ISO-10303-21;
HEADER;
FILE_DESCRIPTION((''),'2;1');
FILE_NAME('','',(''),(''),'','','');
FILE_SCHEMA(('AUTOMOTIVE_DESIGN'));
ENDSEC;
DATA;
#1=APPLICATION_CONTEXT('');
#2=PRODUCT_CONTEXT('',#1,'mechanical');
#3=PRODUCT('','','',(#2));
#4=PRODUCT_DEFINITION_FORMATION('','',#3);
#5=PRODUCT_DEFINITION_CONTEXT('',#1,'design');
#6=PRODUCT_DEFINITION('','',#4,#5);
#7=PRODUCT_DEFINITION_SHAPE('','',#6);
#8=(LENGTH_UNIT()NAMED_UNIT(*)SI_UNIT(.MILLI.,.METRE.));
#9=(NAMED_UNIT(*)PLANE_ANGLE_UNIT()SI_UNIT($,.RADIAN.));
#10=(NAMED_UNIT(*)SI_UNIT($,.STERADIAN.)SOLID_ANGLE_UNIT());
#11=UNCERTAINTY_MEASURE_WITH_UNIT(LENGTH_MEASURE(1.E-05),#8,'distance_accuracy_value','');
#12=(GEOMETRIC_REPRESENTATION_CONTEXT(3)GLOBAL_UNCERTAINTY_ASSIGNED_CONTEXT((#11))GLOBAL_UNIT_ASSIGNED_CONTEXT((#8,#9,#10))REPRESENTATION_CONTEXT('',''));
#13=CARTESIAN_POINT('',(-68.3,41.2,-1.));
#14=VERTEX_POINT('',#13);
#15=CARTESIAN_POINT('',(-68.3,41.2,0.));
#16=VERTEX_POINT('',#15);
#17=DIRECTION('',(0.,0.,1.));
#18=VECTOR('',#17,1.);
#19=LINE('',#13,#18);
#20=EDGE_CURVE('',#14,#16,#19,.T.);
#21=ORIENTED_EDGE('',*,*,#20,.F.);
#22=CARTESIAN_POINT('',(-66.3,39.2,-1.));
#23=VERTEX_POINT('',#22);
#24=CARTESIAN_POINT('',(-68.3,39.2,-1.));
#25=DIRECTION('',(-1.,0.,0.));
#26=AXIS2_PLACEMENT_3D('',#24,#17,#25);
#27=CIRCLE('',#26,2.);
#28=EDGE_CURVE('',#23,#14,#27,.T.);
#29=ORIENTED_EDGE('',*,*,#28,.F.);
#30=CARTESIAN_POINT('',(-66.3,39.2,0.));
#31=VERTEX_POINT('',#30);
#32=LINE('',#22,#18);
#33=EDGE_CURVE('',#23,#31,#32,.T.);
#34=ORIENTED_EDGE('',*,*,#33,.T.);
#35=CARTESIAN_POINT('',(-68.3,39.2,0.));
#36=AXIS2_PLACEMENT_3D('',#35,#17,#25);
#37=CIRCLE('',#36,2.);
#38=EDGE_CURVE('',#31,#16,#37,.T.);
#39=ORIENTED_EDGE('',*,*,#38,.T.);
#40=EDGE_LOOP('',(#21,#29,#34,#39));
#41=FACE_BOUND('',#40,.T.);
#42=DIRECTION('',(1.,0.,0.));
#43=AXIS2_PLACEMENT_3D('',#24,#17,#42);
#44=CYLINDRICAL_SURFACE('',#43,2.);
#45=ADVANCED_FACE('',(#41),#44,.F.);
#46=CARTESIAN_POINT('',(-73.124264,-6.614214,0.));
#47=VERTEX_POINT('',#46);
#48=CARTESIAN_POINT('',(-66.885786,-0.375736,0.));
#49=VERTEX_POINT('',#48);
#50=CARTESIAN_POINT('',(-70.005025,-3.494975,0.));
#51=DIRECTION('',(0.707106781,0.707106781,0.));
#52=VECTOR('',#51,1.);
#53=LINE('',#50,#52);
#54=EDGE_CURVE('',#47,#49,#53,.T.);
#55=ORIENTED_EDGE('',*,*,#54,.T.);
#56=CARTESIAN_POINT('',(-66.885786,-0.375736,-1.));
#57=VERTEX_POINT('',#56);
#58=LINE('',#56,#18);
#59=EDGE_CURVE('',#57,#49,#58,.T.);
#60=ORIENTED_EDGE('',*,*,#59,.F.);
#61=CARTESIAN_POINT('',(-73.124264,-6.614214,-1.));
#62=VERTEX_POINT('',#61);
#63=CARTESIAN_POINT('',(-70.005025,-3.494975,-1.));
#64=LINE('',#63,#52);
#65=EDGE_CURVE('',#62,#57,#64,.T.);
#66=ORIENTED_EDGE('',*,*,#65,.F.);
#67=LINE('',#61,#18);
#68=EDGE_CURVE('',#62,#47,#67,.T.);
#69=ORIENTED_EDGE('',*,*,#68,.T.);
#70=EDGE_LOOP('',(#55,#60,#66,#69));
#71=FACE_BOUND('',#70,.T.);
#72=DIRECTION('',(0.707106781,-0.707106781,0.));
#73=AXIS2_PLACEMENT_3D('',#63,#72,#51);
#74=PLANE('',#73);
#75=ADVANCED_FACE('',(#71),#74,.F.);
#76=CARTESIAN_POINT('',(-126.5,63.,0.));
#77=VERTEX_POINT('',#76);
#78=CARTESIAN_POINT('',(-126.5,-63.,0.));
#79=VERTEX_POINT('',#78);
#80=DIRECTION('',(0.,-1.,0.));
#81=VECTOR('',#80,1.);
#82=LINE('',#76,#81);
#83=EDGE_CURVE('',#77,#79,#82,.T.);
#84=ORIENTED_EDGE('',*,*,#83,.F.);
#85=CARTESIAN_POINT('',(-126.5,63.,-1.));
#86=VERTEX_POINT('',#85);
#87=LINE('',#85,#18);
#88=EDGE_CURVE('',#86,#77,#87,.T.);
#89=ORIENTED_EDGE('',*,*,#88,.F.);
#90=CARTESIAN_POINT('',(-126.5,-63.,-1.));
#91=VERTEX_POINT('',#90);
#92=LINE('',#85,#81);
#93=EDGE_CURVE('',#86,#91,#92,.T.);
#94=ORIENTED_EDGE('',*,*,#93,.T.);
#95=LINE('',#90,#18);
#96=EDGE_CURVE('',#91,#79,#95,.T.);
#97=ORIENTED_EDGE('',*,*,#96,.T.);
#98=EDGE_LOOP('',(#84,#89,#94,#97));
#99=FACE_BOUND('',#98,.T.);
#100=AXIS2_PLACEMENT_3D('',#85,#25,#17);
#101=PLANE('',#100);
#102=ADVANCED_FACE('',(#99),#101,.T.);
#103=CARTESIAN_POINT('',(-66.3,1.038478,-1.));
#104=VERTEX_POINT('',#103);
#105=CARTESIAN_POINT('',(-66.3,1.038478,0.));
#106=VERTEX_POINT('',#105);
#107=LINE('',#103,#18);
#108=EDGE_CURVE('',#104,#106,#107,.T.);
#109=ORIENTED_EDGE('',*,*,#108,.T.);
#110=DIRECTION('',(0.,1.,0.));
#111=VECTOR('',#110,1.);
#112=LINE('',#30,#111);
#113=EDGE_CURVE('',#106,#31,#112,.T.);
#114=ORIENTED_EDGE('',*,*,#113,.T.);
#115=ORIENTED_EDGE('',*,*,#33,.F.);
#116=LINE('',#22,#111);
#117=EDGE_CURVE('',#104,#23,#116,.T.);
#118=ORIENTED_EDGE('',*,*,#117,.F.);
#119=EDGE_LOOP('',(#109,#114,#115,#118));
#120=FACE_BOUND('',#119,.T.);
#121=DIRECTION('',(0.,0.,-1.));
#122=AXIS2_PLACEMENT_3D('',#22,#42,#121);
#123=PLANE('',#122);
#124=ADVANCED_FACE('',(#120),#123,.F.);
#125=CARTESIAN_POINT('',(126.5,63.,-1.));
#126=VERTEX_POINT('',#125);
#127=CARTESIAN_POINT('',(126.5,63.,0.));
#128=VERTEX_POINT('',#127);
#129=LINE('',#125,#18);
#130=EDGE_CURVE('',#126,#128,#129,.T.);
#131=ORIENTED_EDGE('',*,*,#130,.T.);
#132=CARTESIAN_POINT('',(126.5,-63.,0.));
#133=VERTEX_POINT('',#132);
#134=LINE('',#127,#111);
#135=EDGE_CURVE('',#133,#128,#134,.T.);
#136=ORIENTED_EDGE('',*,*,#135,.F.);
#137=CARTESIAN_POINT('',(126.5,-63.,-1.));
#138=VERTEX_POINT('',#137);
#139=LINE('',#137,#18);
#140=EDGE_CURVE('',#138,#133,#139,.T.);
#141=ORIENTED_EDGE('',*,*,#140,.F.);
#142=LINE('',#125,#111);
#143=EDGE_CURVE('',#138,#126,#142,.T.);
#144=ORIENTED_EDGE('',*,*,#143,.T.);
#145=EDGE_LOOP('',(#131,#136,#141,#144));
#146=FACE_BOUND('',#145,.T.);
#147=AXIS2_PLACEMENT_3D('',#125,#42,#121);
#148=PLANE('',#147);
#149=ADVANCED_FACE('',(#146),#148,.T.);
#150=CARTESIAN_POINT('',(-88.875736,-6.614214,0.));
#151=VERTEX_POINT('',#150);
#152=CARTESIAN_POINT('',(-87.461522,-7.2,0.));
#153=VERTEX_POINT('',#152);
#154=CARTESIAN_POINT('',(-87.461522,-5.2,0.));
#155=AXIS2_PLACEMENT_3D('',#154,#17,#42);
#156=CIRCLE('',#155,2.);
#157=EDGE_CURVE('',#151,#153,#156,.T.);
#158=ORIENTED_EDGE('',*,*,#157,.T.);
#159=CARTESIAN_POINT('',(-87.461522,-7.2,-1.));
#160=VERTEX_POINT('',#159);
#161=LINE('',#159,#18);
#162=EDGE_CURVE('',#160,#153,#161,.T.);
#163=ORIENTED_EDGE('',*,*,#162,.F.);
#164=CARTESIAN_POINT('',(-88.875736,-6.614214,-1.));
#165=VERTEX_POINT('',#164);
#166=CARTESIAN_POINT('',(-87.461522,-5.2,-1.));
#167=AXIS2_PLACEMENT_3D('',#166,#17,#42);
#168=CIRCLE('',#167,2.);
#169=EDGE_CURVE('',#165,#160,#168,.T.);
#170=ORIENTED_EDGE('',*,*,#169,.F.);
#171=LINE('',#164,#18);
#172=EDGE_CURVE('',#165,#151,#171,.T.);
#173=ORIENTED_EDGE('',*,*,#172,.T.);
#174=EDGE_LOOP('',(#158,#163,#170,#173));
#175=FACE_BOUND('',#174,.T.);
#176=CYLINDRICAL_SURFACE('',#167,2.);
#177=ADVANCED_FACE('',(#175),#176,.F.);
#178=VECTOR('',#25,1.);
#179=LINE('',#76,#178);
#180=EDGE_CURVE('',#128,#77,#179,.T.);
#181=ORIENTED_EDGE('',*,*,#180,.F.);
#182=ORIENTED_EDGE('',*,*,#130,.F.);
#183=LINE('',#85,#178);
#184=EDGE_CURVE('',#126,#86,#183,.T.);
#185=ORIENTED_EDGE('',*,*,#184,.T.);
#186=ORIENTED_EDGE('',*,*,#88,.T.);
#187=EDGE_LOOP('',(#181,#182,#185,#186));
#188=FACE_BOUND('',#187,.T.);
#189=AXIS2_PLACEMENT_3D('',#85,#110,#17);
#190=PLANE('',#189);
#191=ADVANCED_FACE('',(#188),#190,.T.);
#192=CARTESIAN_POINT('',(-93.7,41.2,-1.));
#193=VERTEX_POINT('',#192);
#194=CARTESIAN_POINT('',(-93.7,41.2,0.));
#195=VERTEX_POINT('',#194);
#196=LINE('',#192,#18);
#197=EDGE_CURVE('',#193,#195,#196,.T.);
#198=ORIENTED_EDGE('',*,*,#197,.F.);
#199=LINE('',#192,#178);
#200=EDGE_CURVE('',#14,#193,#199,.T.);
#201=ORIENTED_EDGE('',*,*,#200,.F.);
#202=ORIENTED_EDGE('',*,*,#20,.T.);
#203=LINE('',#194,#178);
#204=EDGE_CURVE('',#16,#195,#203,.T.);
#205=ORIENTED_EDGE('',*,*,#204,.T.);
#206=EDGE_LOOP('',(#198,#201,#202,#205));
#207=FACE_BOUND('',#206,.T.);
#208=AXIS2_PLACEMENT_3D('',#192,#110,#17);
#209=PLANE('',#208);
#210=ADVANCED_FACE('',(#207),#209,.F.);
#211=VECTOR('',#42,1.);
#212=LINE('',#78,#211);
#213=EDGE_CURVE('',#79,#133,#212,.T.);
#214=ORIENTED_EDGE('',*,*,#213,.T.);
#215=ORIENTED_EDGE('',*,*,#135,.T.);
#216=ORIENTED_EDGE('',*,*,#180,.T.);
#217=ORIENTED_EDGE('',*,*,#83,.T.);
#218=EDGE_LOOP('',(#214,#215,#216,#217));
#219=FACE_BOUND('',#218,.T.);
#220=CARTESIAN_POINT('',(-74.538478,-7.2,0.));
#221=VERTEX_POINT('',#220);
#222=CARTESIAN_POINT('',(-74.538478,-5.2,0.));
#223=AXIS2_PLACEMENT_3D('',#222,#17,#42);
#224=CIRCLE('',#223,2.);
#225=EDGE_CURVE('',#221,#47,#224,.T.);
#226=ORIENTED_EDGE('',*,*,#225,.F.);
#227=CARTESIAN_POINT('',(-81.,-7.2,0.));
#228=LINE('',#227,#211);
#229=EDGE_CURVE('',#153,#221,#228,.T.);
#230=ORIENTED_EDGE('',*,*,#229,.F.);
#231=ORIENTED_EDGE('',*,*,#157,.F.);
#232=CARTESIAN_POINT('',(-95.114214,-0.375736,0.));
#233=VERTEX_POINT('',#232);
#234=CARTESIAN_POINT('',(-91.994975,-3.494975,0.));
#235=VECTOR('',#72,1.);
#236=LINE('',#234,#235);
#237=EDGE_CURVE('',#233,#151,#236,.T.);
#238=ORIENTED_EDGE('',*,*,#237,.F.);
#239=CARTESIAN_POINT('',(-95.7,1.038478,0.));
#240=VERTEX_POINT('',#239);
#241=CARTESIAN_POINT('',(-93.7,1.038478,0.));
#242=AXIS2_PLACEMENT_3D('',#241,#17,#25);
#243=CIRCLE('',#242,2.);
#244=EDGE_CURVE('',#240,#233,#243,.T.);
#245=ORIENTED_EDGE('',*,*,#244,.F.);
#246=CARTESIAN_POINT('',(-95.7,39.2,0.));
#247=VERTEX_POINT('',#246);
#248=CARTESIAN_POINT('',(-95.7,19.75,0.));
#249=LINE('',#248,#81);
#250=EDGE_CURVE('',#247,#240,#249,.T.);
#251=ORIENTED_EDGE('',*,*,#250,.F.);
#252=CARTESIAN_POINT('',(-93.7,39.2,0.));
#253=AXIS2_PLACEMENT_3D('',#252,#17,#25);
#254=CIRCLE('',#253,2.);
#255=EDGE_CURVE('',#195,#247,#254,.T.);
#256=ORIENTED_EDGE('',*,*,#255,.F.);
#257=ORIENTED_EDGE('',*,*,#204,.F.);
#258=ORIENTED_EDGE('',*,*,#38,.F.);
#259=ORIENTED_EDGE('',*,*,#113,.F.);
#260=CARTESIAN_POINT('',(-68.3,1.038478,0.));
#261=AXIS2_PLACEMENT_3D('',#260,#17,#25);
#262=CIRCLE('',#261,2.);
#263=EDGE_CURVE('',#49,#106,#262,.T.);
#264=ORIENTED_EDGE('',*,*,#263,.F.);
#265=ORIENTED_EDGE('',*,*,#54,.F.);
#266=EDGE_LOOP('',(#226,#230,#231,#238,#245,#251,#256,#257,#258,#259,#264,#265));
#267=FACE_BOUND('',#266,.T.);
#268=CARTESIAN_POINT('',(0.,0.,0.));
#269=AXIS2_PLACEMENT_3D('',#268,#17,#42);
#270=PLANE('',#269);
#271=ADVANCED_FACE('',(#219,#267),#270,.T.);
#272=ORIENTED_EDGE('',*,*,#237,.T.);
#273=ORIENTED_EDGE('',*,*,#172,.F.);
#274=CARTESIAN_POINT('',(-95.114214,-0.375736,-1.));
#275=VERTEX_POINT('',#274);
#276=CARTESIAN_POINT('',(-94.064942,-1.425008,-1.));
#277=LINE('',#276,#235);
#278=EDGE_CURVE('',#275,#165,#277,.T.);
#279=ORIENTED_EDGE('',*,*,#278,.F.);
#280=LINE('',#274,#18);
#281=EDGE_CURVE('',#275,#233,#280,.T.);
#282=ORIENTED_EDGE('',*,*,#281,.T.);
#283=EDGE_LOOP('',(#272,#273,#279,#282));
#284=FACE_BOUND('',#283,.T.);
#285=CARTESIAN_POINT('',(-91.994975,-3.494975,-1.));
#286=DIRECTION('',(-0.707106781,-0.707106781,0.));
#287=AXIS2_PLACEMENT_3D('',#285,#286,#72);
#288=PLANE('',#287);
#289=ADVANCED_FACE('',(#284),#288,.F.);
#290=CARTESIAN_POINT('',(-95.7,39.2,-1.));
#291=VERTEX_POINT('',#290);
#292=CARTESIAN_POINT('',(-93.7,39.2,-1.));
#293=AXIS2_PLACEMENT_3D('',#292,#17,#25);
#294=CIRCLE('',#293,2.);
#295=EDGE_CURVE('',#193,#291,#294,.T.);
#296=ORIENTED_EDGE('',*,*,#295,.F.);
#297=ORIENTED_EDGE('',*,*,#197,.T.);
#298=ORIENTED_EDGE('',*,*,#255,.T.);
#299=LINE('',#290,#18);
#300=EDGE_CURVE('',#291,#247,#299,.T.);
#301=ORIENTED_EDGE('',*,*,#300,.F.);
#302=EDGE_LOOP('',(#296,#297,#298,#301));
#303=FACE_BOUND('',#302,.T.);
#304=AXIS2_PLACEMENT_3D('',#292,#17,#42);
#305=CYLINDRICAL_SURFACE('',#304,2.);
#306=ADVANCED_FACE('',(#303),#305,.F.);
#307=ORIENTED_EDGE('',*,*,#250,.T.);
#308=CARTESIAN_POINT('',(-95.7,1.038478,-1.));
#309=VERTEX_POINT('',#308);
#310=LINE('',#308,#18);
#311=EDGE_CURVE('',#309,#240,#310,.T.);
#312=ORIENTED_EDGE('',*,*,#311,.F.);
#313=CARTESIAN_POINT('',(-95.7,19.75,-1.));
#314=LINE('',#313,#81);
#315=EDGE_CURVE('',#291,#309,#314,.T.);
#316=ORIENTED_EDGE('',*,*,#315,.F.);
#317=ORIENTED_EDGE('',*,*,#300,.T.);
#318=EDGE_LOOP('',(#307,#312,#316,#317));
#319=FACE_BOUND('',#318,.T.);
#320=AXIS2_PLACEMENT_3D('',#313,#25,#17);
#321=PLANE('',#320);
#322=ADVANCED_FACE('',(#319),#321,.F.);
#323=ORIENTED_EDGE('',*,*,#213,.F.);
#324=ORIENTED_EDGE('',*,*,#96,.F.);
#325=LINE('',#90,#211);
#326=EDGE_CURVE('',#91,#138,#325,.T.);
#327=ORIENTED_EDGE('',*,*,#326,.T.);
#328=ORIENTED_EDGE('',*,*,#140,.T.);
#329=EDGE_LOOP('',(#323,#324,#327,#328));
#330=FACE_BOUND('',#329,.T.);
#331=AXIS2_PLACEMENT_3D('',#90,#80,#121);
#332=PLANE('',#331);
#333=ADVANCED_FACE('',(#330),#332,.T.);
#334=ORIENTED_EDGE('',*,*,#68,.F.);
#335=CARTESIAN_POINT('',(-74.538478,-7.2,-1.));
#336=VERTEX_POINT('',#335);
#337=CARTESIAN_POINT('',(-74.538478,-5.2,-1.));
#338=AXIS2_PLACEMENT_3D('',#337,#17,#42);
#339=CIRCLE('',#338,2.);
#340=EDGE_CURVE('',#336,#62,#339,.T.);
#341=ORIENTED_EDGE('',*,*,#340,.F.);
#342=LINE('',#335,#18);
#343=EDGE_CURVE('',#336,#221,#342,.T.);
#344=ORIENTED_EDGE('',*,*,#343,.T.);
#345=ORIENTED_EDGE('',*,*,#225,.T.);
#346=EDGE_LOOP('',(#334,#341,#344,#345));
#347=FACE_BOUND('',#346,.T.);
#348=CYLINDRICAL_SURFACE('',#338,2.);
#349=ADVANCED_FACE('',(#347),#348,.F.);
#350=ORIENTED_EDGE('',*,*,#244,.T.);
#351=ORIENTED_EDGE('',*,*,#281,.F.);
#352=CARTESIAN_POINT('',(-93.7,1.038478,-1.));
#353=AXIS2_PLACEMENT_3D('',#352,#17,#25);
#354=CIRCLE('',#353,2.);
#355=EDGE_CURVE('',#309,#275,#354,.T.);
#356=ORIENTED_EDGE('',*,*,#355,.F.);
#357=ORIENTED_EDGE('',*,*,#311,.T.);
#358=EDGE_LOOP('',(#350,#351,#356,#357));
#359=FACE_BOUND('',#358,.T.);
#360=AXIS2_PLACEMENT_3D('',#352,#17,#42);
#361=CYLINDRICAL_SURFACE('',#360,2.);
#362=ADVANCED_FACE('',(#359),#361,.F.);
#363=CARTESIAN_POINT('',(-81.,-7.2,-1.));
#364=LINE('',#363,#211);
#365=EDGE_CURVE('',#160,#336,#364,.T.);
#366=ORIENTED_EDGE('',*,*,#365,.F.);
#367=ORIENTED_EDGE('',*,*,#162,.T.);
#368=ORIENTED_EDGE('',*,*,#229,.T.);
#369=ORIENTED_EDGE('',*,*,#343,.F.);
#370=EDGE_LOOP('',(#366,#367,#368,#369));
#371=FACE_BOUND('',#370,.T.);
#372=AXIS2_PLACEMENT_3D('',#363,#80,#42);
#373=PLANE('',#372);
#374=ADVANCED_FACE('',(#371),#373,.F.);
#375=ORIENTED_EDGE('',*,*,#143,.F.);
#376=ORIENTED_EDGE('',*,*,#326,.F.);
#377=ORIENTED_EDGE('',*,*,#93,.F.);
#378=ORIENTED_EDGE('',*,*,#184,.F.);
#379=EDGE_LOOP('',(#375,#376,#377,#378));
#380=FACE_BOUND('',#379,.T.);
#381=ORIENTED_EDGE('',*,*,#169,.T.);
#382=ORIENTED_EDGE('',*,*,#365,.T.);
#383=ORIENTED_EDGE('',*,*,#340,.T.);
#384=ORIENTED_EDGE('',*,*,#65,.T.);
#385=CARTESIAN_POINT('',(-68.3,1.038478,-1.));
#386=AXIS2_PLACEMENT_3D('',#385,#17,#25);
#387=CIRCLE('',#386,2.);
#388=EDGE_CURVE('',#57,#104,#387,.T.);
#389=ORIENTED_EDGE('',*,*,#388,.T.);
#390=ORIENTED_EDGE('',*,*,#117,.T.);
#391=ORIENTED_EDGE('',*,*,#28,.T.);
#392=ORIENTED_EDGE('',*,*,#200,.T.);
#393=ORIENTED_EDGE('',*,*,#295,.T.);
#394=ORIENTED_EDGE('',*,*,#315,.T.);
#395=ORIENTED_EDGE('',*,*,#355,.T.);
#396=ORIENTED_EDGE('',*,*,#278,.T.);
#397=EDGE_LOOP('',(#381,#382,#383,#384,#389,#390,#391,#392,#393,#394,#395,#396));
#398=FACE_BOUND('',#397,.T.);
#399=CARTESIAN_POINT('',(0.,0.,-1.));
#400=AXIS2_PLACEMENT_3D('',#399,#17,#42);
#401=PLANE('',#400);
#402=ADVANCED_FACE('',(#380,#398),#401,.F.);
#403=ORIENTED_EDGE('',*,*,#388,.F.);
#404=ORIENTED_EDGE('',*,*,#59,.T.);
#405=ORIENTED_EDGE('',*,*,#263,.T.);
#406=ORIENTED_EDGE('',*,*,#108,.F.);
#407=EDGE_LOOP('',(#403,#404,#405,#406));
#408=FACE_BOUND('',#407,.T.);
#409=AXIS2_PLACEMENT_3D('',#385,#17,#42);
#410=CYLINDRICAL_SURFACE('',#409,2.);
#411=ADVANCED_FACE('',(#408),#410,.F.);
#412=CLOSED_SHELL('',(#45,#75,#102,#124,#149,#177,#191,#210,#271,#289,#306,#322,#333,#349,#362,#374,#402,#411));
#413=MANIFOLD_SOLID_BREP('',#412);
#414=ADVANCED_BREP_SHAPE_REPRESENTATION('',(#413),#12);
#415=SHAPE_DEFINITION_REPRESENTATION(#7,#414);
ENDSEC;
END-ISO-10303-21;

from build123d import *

# Parameters (mm, degrees)
SKETCH1_W          = 253
SKETCH1_H          = 126
BASE_FLANGE1_DEPTH = 1


# Sheet-metal steps are written as plain solids
with BuildPart() as part:
    # Sketch1 → Base-Flange1 (new body)
    with BuildSketch(Plane.XY):
        Rectangle(SKETCH1_W, SKETCH1_H)
        with BuildLine():
            Line((-81, -7.2), (-74.538477631, -7.2))
            ThreePointArc((-74.538477631, -7.2), (-73.773110766, -7.047759065), (-73.124264069, -6.614213562))
            Line((-73.124264069, -6.614213562), (-70.005025253, -3.494974747))
            Line((-70.005025253, -3.494974747), (-66.885786438, -0.375735931))
            ThreePointArc((-66.885786438, -0.375735931), (-66.452240935, 0.273110766), (-66.3, 1.038477631))
            Line((-66.3, 1.038477631), (-66.3, 39.2))
            ThreePointArc((-66.3, 39.2), (-66.885786438, 40.614213562), (-68.3, 41.2))
            Line((-68.3, 41.2), (-93.7, 41.2))
            ThreePointArc((-93.7, 41.2), (-95.114213562, 40.614213562), (-95.7, 39.2))
            Line((-95.7, 39.2), (-95.7, 19.75))
            Line((-95.7, 19.75), (-95.7, 1.038477631))
            ThreePointArc((-95.7, 1.038477631), (-95.547759065, 0.273110766), (-95.114213562, -0.375735931))
            Line((-95.114213562, -0.375735931), (-94.064941978, -1.425007515))
            Line((-94.064941978, -1.425007515), (-91.994974747, -3.494974747))
            Line((-91.994974747, -3.494974747), (-88.875735931, -6.614213562))
            ThreePointArc((-88.875735931, -6.614213562), (-88.226889234, -7.047759065), (-87.461522369, -7.2))
            Line((-87.461522369, -7.2), (-81, -7.2))
        make_face(mode=Mode.SUBTRACT)
    extrude(amount=-BASE_FLANGE1_DEPTH)


solid = part.part
